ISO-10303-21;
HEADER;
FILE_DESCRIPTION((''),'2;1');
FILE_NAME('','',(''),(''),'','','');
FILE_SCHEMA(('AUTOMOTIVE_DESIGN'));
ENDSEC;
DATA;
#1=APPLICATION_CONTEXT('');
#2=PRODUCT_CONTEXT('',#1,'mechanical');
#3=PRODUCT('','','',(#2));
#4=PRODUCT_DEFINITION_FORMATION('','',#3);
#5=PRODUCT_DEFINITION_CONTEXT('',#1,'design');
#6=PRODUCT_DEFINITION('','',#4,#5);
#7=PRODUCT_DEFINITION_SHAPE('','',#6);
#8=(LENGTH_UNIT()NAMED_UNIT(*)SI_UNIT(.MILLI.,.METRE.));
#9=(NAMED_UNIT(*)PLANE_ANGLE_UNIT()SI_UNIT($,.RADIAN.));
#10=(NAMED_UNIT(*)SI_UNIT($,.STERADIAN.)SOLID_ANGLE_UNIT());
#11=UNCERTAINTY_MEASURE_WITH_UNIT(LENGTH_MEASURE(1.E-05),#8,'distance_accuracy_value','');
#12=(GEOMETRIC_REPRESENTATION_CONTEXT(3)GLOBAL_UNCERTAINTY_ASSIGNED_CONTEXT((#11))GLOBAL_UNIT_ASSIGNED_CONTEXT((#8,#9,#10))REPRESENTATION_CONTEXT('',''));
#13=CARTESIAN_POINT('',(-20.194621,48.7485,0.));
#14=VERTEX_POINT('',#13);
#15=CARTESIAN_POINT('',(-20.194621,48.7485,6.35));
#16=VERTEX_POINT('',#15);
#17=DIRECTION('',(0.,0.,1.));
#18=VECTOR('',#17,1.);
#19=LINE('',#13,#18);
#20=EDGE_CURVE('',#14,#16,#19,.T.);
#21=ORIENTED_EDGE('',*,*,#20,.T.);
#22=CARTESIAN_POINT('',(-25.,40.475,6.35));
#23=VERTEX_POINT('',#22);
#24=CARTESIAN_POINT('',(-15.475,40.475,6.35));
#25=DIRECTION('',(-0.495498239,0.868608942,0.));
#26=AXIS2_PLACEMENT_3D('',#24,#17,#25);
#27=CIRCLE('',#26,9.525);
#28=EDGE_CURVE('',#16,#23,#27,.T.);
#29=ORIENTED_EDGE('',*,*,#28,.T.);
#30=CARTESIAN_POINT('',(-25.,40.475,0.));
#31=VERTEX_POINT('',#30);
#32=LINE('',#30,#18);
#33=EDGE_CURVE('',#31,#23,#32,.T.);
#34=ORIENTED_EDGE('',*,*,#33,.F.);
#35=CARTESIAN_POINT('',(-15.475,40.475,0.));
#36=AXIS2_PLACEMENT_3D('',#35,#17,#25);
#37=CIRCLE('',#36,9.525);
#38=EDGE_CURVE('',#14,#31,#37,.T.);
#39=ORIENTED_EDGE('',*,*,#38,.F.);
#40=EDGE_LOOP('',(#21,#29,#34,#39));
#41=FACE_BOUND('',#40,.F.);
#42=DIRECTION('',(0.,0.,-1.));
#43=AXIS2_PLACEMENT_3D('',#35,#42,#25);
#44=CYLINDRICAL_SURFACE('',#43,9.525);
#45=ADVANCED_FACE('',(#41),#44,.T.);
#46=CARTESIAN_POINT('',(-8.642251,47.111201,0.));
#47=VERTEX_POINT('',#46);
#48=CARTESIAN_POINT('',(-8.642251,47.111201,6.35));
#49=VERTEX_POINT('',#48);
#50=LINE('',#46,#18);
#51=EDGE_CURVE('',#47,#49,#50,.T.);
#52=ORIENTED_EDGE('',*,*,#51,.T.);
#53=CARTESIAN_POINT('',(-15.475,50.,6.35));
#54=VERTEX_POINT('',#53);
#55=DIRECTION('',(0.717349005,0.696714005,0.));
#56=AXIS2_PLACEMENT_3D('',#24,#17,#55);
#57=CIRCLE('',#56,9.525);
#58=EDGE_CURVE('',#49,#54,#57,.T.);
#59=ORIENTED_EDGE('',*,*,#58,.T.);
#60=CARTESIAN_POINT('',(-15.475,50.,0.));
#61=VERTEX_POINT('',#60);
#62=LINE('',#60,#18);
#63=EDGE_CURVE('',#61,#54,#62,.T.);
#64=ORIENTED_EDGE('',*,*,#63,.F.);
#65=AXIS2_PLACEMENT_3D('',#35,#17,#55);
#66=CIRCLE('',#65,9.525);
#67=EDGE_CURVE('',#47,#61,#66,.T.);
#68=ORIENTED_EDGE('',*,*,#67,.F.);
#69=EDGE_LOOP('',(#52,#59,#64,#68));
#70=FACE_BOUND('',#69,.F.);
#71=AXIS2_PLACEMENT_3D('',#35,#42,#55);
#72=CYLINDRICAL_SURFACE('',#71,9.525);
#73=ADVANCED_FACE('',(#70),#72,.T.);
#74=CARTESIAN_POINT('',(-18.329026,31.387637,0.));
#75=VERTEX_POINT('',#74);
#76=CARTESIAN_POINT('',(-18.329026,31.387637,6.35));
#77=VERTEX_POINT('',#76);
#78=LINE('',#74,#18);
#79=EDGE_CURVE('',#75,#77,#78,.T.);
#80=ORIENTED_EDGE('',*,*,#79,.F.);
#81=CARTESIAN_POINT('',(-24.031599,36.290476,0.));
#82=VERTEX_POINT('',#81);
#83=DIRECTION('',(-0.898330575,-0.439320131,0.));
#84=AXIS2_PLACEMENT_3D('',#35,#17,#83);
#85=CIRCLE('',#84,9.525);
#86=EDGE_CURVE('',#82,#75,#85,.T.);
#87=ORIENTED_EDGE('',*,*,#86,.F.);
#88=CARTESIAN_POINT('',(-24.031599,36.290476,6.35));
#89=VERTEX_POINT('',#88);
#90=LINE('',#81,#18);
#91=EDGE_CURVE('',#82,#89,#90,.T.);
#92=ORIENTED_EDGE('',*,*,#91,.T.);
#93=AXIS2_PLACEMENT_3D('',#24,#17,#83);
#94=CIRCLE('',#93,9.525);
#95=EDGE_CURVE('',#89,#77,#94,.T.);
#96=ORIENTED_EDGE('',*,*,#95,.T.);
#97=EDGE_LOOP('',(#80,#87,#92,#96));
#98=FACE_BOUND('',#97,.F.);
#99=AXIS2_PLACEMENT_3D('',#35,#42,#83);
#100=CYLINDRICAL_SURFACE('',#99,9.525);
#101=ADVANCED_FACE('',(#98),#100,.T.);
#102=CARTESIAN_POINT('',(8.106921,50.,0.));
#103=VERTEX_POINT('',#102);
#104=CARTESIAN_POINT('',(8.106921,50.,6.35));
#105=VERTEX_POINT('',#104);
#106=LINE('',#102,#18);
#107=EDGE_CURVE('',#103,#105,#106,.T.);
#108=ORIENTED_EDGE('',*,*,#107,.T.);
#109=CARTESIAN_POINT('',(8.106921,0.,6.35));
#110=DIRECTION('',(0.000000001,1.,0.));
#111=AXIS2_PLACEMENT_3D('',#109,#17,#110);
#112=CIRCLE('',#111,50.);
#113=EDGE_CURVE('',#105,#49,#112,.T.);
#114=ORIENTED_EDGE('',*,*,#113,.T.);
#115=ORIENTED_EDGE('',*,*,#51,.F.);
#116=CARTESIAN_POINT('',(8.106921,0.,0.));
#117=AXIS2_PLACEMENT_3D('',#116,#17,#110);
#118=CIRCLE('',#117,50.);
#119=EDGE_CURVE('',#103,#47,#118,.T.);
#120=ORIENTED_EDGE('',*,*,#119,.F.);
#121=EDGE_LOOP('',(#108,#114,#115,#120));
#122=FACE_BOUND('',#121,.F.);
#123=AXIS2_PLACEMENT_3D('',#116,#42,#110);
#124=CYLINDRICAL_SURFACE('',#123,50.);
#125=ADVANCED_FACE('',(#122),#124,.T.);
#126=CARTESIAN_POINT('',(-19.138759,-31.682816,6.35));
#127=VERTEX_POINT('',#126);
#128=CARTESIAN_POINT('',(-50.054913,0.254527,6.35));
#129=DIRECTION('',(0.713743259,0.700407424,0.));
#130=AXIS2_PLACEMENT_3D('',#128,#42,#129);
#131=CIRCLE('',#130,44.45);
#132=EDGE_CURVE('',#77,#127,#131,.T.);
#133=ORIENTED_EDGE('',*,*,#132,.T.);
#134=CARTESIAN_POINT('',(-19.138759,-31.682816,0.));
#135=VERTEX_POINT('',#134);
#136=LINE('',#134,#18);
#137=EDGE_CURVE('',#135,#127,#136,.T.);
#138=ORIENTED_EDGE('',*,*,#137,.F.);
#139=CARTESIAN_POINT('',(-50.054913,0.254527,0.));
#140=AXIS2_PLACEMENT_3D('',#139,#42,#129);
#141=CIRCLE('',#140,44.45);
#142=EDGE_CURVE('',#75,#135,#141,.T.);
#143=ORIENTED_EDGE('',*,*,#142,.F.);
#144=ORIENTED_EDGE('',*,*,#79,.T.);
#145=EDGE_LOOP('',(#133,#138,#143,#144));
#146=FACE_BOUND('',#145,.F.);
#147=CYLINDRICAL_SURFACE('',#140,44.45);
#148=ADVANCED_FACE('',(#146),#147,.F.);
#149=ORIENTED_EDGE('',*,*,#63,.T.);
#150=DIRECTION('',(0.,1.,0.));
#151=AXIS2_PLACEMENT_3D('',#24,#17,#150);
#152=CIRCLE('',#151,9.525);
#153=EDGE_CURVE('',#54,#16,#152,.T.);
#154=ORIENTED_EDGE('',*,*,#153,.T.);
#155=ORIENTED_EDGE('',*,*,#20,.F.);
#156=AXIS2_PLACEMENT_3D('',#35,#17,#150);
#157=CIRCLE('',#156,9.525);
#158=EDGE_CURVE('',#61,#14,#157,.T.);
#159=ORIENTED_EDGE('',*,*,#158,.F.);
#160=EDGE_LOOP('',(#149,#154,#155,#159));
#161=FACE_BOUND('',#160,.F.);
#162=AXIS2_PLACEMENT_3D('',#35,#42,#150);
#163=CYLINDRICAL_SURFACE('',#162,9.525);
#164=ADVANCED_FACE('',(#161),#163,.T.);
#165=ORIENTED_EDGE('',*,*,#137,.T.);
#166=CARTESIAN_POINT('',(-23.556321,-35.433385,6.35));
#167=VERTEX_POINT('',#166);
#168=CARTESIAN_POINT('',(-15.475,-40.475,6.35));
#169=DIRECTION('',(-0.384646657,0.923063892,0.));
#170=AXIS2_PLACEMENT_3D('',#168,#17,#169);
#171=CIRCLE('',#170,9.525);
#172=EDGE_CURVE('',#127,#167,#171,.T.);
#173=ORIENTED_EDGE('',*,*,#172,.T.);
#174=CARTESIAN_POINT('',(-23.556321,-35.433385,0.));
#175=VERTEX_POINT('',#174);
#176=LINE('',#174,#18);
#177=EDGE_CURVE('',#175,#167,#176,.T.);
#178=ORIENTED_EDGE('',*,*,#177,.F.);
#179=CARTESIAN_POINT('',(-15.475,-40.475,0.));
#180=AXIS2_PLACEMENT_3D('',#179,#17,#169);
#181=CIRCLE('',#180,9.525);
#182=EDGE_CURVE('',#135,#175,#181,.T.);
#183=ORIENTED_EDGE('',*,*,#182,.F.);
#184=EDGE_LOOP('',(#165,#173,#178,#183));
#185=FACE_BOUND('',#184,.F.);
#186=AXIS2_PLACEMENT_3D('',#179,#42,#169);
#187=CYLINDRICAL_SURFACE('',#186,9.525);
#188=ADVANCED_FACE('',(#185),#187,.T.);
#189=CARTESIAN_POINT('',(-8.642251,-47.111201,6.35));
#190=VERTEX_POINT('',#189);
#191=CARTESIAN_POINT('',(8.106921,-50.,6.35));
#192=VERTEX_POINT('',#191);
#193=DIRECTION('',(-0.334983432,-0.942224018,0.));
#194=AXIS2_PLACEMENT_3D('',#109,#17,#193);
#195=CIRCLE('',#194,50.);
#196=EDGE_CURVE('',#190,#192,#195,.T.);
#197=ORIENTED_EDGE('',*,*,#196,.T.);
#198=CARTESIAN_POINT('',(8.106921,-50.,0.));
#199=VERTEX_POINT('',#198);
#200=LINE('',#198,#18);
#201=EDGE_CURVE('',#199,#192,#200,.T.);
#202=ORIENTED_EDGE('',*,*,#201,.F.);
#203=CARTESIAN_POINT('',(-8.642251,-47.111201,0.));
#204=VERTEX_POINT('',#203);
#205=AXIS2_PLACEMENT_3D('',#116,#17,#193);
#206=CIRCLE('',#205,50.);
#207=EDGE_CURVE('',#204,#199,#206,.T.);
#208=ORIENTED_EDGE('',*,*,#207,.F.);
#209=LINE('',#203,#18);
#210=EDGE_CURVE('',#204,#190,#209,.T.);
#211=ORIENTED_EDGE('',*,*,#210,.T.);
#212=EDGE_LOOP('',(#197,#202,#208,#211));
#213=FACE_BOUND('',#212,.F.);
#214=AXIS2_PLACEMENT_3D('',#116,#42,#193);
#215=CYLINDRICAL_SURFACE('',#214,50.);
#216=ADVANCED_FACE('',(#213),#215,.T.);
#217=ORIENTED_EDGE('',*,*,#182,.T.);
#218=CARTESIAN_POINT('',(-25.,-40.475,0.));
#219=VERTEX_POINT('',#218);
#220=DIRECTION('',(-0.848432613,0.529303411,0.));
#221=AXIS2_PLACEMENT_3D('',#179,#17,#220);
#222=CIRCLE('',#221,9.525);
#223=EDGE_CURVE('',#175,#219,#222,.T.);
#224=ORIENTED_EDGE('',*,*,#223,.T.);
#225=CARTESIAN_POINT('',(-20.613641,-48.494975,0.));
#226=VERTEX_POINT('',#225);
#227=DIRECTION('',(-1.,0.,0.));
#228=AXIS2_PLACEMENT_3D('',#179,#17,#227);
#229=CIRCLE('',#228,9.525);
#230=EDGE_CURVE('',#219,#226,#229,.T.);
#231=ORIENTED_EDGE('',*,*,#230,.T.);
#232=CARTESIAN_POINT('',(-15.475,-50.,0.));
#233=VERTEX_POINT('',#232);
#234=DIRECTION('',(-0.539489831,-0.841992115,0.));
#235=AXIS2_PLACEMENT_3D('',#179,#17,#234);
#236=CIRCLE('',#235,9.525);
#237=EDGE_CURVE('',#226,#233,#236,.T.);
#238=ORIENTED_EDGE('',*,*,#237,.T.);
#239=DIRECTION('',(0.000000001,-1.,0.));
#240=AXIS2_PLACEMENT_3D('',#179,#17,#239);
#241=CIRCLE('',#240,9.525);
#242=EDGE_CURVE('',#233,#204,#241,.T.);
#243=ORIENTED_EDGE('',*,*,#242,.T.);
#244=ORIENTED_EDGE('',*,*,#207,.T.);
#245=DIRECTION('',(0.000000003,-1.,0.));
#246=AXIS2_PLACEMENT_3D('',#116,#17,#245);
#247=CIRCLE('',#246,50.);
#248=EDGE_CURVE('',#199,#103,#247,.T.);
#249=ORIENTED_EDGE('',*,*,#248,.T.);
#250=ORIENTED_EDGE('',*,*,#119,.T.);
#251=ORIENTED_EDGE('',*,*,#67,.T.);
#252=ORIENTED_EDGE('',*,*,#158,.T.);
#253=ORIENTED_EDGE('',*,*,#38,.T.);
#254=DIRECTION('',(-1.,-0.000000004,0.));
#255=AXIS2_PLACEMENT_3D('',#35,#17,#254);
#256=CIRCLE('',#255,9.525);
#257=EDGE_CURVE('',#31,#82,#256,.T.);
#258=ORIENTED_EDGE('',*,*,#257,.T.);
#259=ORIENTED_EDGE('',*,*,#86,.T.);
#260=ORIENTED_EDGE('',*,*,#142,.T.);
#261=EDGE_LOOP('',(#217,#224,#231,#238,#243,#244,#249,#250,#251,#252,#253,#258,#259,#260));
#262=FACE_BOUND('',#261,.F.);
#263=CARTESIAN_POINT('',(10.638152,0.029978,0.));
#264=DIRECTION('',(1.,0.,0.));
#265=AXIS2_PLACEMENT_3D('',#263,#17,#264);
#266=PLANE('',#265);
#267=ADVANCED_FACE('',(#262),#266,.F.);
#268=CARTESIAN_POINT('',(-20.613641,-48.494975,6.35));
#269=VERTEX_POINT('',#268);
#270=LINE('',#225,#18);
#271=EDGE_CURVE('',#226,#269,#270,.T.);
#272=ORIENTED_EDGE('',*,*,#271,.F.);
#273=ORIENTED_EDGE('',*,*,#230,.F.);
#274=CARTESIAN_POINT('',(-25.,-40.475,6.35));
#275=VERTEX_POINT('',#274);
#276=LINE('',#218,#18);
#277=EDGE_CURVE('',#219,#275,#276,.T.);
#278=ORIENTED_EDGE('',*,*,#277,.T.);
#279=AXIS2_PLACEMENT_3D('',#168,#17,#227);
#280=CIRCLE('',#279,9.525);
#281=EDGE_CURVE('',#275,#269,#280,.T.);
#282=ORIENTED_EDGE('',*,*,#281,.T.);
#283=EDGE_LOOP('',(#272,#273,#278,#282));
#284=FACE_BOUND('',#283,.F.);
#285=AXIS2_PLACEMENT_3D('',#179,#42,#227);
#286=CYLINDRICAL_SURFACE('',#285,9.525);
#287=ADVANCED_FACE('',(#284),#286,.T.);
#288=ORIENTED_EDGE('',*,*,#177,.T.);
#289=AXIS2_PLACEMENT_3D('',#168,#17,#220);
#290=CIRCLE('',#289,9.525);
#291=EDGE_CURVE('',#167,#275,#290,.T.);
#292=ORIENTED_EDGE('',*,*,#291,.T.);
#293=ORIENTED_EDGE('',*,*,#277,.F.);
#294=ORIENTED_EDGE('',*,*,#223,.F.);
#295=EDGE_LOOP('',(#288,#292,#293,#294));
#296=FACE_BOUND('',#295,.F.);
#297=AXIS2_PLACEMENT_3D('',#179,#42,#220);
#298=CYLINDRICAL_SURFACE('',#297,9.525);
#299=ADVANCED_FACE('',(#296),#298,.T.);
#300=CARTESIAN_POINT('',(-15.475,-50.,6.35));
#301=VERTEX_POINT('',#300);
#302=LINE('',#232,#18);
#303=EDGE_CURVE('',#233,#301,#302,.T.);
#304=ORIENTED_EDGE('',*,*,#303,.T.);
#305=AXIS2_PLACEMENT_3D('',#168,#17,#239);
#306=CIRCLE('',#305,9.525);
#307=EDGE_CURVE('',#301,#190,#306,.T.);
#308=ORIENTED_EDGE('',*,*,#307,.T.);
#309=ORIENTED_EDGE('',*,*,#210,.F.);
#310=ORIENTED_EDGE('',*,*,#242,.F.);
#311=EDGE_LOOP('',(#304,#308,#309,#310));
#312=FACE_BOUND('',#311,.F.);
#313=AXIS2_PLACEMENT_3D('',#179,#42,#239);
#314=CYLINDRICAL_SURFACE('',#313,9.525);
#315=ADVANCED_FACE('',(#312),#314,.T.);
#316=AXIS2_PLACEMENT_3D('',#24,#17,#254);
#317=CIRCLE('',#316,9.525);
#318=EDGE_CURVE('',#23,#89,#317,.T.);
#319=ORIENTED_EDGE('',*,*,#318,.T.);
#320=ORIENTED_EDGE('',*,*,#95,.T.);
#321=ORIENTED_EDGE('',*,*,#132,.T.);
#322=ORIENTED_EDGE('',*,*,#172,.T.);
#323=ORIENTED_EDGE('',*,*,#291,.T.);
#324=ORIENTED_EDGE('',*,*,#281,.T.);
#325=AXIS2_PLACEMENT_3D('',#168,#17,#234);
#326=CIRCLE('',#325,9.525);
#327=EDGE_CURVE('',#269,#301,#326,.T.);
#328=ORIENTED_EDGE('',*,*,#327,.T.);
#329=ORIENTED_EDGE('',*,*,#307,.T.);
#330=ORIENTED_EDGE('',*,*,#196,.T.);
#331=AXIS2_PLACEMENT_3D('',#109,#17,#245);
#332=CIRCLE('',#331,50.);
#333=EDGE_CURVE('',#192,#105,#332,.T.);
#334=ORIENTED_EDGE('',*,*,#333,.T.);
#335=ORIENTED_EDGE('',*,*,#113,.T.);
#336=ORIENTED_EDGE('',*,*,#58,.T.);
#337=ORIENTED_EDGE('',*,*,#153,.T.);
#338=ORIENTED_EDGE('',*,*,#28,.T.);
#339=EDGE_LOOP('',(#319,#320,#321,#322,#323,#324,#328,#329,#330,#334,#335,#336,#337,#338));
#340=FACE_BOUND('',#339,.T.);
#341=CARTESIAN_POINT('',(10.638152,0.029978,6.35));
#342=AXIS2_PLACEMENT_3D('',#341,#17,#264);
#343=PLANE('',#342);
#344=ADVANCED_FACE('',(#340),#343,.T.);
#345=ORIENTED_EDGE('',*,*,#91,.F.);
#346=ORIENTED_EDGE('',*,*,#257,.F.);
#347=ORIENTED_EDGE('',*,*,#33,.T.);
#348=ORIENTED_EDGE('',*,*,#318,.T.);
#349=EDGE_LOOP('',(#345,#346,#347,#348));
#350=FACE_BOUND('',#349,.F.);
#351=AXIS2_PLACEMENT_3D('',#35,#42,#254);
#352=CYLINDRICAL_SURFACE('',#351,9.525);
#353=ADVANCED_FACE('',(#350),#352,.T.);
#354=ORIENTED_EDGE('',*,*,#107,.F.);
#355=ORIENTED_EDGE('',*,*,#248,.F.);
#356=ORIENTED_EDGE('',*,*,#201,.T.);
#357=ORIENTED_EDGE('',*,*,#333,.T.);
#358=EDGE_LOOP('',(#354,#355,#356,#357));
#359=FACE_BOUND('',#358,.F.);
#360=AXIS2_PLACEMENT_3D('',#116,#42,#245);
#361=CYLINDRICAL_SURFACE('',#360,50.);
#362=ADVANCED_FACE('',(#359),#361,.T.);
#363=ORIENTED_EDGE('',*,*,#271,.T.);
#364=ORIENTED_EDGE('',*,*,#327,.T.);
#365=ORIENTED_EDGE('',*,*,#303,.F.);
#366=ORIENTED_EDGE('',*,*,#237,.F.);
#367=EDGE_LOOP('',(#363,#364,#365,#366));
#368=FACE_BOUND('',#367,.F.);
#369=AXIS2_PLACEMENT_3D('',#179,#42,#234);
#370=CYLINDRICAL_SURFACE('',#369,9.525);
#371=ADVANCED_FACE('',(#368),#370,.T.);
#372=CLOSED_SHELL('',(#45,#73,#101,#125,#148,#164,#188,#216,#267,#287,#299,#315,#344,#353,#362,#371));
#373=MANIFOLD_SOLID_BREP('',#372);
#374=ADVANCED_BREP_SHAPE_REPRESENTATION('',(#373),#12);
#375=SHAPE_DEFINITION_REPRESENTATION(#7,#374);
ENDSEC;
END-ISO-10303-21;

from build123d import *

# Parameters (mm, degrees)
F1_DEPTH = 6.35


# Not quite as in the source:
# - a feature names something its author has since deleted; it is built from what else it names


with BuildPart() as f1:
    # F0 (on Top) → F1 (new body)
    with BuildSketch(Plane.XY):
        with BuildLine():
            ThreePointArc((-20.6136406437, -48.4949748961), (-18.1522527003, -49.6160033902), (-15.474999986, -50))
            ThreePointArc((-15.474999986, -50), (-11.7658348983, -49.248124828), (-8.64225073, -47.1112009021))
            ThreePointArc((-8.64225073, -47.1112009021), (-0.3913128261, -49.2725077899), (8.1069210399, -50))
            ThreePointArc((8.1069210399, -50), (58.1069208781, 4.4e-08), (8.1069209519, 50))
            ThreePointArc((8.1069209519, 50), (-0.3913128695, 49.2725077824), (-8.64225073, 47.1112009021))
            ThreePointArc((-8.64225073, 47.1112009021), (-11.7658349048, 49.2481248308), (-15.475, 50))
            ThreePointArc((-15.475, 50), (-17.9163659919, 49.6818103648), (-20.1946207283, 48.7485001771))
            ThreePointArc((-20.1946207283, 48.7485001771), (-23.7115044996, 45.2588915778), (-25, 40.4749999628))
            ThreePointArc((-25, 40.4749999628), (-24.7547421233, 38.3274406584), (-24.0315987301, 36.2904757532))
            ThreePointArc((-24.0315987301, 36.2904757532), (-21.6846733781, 33.2524255603), (-18.3290256128, 31.3876371921))
            ThreePointArc((-18.3290256128, 31.3876371921), (-5.6085763504, -0.3160997755), (-19.1387594108, -31.6828164271))
            ThreePointArc((-19.1387594108, -31.6828164271), (-21.6396911965, -33.2139940469), (-23.5563206429, -35.433385014))
            ThreePointArc((-23.5563206429, -35.433385014), (-24.6319701355, -37.8528781611), (-25, -40.475))
            ThreePointArc((-25, -40.475), (-23.8317690267, -45.0455619386), (-20.6136406437, -48.4949748961))
        make_face()
    extrude(amount=F1_DEPTH)


solid = f1.part
